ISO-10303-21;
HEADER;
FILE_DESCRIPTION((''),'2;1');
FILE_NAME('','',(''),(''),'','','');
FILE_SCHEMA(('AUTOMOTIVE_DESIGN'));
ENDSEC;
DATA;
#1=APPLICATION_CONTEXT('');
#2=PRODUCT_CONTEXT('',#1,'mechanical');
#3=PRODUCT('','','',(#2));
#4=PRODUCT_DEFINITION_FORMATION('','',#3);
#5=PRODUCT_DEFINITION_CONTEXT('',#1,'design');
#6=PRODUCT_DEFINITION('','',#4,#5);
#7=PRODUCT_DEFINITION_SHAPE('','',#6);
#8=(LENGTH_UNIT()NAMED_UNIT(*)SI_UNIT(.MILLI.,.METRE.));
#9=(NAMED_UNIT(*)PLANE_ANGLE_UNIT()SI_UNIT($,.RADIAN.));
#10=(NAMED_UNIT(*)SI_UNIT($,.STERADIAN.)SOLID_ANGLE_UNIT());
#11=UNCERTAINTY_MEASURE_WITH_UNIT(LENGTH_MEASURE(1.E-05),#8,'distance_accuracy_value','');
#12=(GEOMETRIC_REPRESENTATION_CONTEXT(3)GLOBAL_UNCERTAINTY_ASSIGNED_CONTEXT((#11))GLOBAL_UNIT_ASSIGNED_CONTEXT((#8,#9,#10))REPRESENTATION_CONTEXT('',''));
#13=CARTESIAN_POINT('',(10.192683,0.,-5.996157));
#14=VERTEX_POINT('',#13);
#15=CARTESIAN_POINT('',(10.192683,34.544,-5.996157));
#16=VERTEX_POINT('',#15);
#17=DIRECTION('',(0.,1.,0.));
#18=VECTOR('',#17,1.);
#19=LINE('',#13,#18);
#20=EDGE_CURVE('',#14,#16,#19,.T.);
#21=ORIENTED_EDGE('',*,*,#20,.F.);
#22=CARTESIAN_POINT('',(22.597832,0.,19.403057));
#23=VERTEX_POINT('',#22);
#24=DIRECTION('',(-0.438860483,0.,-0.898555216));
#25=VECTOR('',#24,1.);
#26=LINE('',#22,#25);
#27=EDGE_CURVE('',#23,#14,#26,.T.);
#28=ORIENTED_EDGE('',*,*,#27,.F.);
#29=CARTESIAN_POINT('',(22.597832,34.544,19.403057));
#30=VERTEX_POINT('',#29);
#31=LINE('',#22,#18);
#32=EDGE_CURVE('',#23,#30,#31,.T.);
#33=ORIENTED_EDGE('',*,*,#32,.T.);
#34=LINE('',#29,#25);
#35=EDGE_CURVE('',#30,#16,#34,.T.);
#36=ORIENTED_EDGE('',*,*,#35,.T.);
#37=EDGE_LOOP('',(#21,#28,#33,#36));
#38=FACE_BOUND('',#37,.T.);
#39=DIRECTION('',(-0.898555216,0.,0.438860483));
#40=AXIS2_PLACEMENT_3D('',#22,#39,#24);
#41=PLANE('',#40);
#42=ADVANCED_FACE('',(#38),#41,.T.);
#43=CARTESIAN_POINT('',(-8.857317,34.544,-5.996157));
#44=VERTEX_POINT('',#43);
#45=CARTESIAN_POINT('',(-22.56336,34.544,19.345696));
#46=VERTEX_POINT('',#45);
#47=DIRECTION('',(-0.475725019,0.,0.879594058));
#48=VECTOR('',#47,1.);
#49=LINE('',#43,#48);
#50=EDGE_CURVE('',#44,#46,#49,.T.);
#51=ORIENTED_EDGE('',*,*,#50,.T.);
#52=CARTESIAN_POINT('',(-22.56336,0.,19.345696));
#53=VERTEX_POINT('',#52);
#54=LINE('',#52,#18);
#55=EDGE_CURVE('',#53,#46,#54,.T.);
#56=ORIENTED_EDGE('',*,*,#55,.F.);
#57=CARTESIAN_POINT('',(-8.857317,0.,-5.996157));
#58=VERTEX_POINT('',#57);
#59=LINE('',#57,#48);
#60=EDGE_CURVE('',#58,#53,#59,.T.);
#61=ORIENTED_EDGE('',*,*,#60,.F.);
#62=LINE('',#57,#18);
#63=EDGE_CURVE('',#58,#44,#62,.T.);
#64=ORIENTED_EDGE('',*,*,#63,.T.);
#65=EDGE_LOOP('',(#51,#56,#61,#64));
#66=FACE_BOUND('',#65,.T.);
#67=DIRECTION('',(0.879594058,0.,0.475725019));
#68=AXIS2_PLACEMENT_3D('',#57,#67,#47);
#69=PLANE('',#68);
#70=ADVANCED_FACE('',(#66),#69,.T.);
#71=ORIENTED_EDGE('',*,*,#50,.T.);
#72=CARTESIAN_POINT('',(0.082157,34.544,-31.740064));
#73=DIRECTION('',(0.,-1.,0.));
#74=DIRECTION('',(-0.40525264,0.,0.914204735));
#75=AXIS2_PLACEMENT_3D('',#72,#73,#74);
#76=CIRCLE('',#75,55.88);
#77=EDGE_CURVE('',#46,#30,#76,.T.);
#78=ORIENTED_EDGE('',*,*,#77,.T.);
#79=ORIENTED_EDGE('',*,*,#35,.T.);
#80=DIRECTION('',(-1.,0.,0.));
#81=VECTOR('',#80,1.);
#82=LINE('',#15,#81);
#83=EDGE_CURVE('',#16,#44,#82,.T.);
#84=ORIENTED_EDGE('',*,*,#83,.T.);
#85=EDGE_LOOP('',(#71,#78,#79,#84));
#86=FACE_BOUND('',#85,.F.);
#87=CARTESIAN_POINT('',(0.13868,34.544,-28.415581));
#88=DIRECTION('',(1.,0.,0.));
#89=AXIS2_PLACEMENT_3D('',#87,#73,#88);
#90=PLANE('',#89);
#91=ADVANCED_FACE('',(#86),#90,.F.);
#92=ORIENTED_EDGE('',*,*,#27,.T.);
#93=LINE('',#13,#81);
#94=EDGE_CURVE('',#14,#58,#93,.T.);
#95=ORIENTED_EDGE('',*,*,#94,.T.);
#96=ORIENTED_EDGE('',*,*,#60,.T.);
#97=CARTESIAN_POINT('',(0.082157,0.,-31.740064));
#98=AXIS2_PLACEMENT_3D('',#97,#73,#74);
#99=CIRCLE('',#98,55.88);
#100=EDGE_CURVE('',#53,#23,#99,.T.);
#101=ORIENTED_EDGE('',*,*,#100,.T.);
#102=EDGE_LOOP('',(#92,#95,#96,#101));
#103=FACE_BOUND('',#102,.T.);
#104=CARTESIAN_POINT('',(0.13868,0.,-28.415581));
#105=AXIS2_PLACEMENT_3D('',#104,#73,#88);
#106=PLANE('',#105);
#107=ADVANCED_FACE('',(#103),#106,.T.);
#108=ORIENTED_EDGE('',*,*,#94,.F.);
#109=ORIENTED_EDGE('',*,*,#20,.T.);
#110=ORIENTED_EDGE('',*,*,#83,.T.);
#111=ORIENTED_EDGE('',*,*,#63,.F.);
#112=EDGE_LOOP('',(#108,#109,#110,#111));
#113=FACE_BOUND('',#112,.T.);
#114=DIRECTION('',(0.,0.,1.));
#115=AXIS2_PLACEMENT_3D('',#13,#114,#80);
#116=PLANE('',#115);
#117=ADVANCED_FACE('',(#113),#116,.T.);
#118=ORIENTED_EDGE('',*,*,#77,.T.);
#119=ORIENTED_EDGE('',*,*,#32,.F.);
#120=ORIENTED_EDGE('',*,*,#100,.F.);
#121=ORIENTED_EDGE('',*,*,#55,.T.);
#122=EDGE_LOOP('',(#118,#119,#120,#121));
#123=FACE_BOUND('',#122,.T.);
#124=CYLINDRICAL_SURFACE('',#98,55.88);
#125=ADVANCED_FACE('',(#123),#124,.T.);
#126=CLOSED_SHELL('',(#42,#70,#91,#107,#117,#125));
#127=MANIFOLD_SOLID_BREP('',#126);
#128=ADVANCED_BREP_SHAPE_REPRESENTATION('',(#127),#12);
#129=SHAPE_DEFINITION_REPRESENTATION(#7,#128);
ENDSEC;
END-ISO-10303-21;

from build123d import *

# Parameters (mm, degrees)
F1_DEPTH = 34.544


# Not quite as in the source:
# - a feature names something its author has since deleted; it is built from what else it names


with BuildPart() as f1:
    # F0 (on Front) → F1 (new body)
    with BuildSketch(Plane.XZ):
        with BuildLine():
            ThreePointArc((-22.5633601832, 19.345696453), (-30.3903128941, -78.5802494572), (55.9621573201, -31.7400641561))
            ThreePointArc((55.9621573201, -31.7400641561), (46.8836011402, -1.2081258561), (22.5978317526, 19.4030566408))
            Line((22.5978317526, 19.4030566408), (10.1926827312, -5.9961574152))
            Line((10.1926827312, -5.9961574152), (-8.8573172688, -5.9961574152))
            Line((-8.8573172688, -5.9961574152), (-22.5633601832, 19.345696453))
        make_face()
    extrude(amount=-F1_DEPTH)


solid = f1.part
